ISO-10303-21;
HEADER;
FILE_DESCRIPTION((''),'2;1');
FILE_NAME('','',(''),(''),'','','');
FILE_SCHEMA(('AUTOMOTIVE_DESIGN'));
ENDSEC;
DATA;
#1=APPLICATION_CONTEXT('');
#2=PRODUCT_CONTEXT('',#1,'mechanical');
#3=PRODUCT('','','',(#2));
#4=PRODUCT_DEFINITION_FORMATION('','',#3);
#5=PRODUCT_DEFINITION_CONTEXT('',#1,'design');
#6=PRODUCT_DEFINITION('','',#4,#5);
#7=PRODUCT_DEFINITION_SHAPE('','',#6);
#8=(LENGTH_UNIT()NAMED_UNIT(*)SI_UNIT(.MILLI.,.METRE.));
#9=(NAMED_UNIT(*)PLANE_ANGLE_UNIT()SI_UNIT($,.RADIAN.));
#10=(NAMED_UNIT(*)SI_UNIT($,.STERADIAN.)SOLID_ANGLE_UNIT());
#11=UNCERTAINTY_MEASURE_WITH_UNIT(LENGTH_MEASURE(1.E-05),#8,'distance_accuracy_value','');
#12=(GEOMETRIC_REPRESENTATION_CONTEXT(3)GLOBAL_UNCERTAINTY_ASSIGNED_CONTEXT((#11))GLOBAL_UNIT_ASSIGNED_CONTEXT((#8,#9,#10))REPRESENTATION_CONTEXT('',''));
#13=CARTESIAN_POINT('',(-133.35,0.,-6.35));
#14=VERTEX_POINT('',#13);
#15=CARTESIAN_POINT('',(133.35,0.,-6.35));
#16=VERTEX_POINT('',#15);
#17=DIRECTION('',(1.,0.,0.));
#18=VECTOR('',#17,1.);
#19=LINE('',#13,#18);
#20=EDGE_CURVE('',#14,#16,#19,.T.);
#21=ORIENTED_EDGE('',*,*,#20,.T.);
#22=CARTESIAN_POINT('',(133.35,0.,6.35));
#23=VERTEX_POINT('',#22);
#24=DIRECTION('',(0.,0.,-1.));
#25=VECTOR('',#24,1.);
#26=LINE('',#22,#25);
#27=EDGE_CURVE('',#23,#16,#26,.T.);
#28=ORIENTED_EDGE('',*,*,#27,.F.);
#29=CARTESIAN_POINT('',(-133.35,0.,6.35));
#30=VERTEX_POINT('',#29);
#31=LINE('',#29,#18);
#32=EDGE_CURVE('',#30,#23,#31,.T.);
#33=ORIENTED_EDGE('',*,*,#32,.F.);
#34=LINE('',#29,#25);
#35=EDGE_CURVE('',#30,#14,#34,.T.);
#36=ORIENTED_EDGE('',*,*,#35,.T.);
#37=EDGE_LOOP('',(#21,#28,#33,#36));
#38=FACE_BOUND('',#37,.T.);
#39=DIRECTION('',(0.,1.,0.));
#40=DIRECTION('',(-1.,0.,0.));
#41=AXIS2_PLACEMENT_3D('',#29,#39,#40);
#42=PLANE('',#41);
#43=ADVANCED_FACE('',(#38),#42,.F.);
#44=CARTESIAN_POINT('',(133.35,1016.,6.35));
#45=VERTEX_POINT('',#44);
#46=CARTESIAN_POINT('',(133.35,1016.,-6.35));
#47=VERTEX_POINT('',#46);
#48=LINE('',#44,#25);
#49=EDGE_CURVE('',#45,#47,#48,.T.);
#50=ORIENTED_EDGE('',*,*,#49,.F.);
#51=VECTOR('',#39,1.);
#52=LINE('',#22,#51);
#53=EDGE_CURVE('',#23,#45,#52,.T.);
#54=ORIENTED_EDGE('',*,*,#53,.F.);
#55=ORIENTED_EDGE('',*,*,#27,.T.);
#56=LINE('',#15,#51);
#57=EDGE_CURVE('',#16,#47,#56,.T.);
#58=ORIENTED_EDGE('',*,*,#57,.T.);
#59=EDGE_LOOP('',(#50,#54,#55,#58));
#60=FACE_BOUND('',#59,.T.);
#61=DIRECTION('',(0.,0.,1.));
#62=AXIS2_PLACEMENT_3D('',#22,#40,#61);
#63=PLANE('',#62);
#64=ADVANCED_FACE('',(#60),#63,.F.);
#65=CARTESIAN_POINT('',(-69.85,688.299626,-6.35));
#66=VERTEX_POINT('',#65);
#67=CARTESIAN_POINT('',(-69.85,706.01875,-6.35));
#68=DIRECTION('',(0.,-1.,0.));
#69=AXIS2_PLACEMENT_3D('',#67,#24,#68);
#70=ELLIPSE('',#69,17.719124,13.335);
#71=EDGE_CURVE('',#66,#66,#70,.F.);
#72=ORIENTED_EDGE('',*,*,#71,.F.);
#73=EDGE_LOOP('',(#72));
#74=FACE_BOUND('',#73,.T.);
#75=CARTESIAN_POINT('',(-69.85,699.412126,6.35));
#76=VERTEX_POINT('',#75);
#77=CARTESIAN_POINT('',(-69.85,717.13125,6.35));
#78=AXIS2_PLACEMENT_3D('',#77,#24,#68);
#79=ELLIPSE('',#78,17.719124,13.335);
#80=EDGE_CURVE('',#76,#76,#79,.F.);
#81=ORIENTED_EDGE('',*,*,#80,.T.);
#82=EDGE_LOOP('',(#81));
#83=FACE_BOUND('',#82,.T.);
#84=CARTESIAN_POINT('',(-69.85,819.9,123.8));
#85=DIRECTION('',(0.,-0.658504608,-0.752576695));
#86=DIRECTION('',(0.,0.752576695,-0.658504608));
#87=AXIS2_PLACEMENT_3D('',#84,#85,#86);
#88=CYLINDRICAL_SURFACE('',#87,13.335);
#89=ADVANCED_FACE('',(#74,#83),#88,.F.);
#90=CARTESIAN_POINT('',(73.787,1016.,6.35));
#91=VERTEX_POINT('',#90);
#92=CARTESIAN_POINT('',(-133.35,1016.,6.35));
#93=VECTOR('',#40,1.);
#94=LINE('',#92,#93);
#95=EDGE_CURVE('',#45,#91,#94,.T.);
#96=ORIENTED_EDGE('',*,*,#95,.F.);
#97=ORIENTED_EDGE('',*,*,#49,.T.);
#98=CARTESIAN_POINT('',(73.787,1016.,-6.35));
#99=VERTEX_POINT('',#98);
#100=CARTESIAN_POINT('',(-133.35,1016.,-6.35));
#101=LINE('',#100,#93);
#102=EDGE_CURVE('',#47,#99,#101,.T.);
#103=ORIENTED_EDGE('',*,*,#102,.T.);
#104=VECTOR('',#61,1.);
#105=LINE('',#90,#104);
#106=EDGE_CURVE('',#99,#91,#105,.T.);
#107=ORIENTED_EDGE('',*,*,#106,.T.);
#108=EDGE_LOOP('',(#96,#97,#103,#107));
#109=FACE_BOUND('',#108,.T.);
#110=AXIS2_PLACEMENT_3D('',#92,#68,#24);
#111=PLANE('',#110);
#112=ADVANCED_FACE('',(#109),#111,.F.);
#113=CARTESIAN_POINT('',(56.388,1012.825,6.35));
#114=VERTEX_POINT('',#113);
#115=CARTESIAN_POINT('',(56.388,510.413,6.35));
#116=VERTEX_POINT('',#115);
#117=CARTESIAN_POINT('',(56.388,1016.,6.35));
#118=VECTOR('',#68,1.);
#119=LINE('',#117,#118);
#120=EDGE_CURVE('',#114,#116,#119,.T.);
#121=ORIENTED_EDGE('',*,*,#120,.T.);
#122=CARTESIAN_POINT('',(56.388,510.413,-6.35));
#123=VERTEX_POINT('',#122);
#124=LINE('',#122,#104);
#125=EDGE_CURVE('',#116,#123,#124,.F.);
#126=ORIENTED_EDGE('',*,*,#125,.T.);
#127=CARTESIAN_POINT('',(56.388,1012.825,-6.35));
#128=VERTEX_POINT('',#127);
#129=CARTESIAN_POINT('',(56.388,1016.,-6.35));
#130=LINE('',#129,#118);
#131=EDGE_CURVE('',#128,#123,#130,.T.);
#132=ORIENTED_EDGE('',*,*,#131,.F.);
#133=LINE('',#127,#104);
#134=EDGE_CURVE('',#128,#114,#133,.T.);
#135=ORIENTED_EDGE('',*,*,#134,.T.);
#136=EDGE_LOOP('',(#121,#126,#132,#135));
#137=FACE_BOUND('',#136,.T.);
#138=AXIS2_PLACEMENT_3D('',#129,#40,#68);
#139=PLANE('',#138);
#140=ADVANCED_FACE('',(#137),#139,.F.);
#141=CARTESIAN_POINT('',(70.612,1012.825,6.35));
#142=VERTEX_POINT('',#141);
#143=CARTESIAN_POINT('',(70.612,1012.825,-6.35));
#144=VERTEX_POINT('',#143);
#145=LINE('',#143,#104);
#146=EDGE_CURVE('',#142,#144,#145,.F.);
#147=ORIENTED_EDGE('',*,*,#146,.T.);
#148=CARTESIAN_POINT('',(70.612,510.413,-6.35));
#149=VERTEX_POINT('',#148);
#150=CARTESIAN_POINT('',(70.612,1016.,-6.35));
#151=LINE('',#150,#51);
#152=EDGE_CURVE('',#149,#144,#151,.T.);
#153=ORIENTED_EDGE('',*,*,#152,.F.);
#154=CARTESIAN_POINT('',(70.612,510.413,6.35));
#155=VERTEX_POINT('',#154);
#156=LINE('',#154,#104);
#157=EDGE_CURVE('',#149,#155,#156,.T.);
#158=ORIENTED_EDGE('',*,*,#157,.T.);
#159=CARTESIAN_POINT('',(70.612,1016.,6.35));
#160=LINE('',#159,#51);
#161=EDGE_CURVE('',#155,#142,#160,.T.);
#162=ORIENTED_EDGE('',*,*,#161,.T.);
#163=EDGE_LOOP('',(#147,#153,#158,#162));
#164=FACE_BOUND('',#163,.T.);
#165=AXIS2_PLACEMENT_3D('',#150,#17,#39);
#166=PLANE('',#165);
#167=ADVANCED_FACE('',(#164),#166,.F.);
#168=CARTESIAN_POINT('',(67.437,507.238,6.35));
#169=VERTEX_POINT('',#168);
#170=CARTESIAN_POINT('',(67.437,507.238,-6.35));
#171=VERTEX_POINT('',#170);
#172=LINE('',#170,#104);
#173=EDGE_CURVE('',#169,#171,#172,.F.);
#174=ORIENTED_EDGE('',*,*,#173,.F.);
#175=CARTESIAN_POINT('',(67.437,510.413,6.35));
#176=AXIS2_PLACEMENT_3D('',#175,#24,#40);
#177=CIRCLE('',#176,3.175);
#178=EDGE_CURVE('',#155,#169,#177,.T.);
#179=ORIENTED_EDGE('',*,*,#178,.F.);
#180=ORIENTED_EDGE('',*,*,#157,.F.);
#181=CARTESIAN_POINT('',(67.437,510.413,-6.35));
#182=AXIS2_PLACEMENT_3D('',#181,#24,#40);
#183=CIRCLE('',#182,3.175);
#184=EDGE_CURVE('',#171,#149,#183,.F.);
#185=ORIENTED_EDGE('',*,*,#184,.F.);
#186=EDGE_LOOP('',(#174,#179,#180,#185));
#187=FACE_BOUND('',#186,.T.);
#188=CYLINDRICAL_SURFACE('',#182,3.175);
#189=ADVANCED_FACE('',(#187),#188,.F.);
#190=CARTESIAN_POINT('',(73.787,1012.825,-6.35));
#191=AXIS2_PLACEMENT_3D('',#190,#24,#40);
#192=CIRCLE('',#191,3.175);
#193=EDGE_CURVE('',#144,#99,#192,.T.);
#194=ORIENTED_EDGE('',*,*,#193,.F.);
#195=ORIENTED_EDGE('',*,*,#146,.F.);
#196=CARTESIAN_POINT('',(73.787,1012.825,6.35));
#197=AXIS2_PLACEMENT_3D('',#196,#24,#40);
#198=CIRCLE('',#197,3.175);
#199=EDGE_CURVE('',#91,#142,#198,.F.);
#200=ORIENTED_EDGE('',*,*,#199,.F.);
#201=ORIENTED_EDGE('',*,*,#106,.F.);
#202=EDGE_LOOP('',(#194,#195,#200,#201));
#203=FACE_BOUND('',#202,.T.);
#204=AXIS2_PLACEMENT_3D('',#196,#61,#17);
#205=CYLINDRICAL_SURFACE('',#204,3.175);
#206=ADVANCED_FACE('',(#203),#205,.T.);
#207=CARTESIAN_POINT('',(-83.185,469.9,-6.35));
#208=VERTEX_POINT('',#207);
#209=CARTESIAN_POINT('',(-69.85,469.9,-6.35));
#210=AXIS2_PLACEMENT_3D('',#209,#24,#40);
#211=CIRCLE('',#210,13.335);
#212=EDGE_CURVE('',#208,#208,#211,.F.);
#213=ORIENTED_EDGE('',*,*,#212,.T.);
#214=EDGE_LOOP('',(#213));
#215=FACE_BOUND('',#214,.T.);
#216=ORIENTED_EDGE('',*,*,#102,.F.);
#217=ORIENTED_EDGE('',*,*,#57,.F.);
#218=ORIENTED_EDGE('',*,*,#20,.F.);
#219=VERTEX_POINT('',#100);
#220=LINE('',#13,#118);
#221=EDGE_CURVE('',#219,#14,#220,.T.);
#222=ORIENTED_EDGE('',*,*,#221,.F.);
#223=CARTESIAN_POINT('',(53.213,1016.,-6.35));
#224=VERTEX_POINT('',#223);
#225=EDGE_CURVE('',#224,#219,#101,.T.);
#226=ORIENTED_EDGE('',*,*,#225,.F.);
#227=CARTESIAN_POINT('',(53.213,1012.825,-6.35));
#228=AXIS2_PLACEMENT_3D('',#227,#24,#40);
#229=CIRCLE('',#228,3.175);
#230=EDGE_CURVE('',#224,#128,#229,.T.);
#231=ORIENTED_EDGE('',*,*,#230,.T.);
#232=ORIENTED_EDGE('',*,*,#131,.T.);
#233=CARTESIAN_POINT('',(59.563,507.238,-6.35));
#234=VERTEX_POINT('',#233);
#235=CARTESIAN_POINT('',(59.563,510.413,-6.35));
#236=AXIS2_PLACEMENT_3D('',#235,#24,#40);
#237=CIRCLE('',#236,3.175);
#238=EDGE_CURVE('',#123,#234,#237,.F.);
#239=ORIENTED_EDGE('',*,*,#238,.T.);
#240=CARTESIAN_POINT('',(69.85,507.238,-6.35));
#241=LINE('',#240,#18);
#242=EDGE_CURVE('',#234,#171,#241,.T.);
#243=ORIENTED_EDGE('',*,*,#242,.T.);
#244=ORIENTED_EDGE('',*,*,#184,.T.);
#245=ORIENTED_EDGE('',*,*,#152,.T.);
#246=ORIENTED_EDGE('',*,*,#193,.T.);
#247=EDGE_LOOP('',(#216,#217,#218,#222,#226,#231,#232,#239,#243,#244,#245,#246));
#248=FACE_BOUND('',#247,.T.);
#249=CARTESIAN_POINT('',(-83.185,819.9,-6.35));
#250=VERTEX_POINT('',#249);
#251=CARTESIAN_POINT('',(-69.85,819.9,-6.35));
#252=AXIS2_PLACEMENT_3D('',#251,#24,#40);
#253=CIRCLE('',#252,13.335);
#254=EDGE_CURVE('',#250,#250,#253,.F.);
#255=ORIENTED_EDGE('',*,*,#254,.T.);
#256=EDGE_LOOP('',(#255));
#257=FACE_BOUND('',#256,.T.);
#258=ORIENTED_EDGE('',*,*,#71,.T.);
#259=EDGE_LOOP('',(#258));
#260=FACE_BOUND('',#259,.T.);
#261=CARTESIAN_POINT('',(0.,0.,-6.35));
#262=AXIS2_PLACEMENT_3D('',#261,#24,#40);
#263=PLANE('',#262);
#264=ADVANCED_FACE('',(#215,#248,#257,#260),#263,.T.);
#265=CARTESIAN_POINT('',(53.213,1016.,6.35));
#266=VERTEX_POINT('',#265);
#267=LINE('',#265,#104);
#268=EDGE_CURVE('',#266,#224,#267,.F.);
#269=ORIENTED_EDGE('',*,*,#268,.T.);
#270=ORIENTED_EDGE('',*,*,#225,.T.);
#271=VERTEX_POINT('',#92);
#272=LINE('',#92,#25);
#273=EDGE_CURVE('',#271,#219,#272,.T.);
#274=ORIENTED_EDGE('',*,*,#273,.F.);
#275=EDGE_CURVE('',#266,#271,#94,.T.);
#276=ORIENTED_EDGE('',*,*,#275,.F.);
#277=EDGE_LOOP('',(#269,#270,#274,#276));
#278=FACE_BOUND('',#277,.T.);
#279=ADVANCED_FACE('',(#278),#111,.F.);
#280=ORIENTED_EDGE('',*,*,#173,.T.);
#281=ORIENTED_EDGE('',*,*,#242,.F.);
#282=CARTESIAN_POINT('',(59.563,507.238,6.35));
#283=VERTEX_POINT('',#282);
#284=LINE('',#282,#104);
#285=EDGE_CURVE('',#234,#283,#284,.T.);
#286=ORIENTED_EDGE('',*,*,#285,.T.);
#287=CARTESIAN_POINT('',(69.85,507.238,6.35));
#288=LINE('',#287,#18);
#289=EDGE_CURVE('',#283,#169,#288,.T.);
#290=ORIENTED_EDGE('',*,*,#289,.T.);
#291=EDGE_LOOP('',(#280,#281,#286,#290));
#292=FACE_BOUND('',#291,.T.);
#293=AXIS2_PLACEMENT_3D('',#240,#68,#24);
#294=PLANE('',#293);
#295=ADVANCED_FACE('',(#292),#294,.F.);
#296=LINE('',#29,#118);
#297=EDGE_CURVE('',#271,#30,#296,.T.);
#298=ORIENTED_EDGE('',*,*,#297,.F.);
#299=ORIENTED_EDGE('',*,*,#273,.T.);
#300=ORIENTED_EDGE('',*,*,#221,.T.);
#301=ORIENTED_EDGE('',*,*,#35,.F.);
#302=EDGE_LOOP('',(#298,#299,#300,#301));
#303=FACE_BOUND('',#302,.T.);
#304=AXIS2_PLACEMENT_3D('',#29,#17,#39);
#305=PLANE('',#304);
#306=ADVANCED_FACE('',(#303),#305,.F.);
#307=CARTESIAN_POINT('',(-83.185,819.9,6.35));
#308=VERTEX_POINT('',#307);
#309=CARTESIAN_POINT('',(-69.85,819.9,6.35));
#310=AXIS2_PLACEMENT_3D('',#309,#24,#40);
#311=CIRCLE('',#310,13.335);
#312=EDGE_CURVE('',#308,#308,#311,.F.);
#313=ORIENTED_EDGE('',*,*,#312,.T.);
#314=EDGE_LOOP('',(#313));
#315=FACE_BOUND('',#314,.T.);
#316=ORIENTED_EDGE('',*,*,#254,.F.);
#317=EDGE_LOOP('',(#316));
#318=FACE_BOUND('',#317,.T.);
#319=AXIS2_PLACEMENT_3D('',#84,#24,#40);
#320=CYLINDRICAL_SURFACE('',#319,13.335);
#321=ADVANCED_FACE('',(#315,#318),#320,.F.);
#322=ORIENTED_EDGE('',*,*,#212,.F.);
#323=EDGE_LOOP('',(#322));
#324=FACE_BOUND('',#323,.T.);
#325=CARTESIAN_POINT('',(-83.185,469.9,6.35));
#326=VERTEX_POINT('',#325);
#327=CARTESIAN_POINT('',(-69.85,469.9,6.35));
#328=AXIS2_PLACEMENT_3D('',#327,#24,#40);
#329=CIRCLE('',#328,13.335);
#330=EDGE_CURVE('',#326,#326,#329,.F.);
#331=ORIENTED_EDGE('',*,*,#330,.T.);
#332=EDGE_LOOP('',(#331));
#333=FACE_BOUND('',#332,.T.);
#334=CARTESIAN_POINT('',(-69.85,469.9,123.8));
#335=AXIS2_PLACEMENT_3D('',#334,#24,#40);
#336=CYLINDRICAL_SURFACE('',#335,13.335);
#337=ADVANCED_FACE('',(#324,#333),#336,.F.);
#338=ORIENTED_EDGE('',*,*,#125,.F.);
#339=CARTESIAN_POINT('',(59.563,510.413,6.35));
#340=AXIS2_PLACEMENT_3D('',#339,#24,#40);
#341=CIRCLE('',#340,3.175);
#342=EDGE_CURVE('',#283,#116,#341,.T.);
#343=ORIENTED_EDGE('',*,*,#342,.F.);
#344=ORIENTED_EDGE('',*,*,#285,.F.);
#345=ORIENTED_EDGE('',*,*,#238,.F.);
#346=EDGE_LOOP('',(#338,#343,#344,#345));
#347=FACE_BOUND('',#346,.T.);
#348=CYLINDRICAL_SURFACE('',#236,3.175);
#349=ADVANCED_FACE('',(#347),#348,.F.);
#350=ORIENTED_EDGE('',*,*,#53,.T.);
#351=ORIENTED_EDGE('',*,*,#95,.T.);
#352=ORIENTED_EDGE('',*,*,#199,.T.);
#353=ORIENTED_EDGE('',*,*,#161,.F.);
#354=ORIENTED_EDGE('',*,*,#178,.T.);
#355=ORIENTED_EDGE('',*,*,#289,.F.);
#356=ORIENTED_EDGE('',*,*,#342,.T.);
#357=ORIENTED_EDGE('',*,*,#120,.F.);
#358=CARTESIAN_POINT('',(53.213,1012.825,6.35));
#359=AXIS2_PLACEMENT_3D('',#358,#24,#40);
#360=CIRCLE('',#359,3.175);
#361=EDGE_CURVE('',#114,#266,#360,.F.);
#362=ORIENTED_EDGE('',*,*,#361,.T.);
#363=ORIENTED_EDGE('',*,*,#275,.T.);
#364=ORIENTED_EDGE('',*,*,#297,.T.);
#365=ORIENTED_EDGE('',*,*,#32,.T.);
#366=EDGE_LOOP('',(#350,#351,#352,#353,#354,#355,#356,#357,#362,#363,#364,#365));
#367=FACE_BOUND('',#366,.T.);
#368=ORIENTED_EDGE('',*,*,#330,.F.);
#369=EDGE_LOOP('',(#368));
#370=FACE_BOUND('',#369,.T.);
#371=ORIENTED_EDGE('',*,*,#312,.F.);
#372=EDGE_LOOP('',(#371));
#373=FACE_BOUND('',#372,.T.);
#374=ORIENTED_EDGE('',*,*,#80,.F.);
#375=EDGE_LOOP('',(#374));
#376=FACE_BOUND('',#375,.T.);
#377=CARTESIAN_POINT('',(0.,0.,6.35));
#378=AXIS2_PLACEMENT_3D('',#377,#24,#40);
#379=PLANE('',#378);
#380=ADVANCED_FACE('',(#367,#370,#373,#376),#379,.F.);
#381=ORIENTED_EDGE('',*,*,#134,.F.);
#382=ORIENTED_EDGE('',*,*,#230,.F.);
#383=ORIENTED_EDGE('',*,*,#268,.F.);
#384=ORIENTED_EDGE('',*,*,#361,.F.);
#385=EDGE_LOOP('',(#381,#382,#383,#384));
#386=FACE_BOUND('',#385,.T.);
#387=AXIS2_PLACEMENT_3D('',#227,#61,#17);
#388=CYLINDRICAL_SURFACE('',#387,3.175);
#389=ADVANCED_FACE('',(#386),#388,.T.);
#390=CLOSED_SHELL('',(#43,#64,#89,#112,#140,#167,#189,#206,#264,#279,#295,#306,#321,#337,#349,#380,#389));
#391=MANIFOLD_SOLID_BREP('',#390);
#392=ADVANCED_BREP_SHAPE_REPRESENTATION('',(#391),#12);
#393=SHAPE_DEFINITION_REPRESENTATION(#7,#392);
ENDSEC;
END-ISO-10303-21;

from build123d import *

# Parameters (mm, degrees)
SKETCH2_W               = 266.7
SKETCH2_H               = 1016
BOSS_EXTRUDE1_DEPTH     = 6.35
CUT_EXTRUDE3_DEPTH      = 1025.733402028
CUT_EXTRUDE3_DEPTH_BACK = 1025.733402028
SKETCH5_W               = 12.7
SKETCH5_H               = 508
MOVE_FACE_SLOT_BY       = 0.762
MOVE_FACE_SLOT_2_BY     = 0.762
MOVE_FACE_SLOT_3_BY     = 0.762
FILLET1_R               = 3.175


with BuildPart() as part:
    # Sketch2 → Boss-Extrude1 (new, symmetric)
    with BuildSketch(Plane.XY):
        with Locations((0, 508)):
            Rectangle(SKETCH2_W, SKETCH2_H)
    extrude(amount=BOSS_EXTRUDE1_DEPTH, both=True)

    # Cavity1: read off the stored shape, not the designer's step
    # Cavity1: loft between two sections, ruled curve by curve
    cavity1_from = [
        Edge.make_three_point_arc((-82.55, 819.9, 6.35), (-69.85, 832.6, 6.35), (-57.15, 819.9, 6.35)),
        Edge.make_three_point_arc((-57.15, 819.9, 6.35), (-69.85, 807.2, 6.35), (-82.55, 819.9, 6.35)),
    ]
    cavity1_to = [
        Edge.make_three_point_arc((-82.55, 819.9, -6.35), (-69.85, 832.6, -6.35), (-57.15, 819.9, -6.35)),
        Edge.make_three_point_arc((-57.15, 819.9, -6.35), (-69.85, 807.2, -6.35), (-82.55, 819.9, -6.35)),
    ]
    cavity1 = Solid(Shell([*[Face.make_surface_from_curves(cavity1_from[k], cavity1_to[k]) for k in range(2)], Face(Wire(cavity1_from)), Face(Wire(cavity1_to))]))
    add(cavity1, mode=Mode.SUBTRACT)

    # Cavity1 2: loft between two sections, ruled curve by curve
    cavity1_2_from = [
        Edge.make_three_point_arc((-69.85, 714.991315977, 23.190482806), (-82.55, 724.54904, 14.827474286), (-69.85, 734.106764023, 6.464465766)),
        Edge.make_three_point_arc((-69.85, 734.106764023, 6.464465766), (-57.15, 724.54904, 14.827474286), (-69.85, 714.991315977, 23.190482806)),
    ]
    cavity1_2_to = [
        Edge.make_three_point_arc((-69.85, 689.13960738, -6.354327019), (-82.55, 698.697331403, -14.717335539), (-69.85, 708.255055426, -23.080344059)),
        Edge.make_three_point_arc((-69.85, 708.255055426, -23.080344059), (-57.15, 698.697331403, -14.717335539), (-69.85, 689.13960738, -6.354327019)),
    ]
    cavity1_2 = Solid(Shell([*[Face.make_surface_from_curves(cavity1_2_from[k], cavity1_2_to[k]) for k in range(2)], Face(Wire(cavity1_2_from)), Face(Wire(cavity1_2_to))]))
    add(cavity1_2, mode=Mode.SUBTRACT)

    # Cavity1 3: loft between two sections, ruled curve by curve
    cavity1_3_from = [
        Edge.make_three_point_arc((-82.55, 469.9, 6.35), (-69.85, 482.6, 6.35), (-57.15, 469.9, 6.35)),
        Edge.make_three_point_arc((-57.15, 469.9, 6.35), (-69.85, 457.2, 6.35), (-82.55, 469.9, 6.35)),
    ]
    cavity1_3_to = [
        Edge.make_three_point_arc((-82.55, 469.9, -6.35), (-69.85, 482.6, -6.35), (-57.15, 469.9, -6.35)),
        Edge.make_three_point_arc((-57.15, 469.9, -6.35), (-69.85, 457.2, -6.35), (-82.55, 469.9, -6.35)),
    ]
    cavity1_3 = Solid(Shell([*[Face.make_surface_from_curves(cavity1_3_from[k], cavity1_3_to[k]) for k in range(2)], Face(Wire(cavity1_3_from)), Face(Wire(cavity1_3_to))]))
    add(cavity1_3, mode=Mode.SUBTRACT)

    # Sketch5 → Cut-Extrude3 (cut, two sides: drawn at the far end of the back side and taken through both)
    with BuildSketch(Plane.XY.offset(-CUT_EXTRUDE3_DEPTH_BACK)):
        with Locations((63.5, 762)):
            Rectangle(SKETCH5_W, SKETCH5_H)
    extrude(amount=CUT_EXTRUDE3_DEPTH + CUT_EXTRUDE3_DEPTH_BACK, mode=Mode.SUBTRACT)

    # Move Face slot: a face moved inward by 0.762
    extrude(part.faces().sort_by_distance((63.5, 508, 0))[0], amount=MOVE_FACE_SLOT_BY, dir=(0, -1, 0), mode=Mode.SUBTRACT)

    # Move Face slot 2: a face moved inward by 0.762
    extrude(part.faces().sort_by_distance((69.85, 762, 0))[0], amount=MOVE_FACE_SLOT_2_BY, dir=(1, 0, 0), mode=Mode.SUBTRACT)

    # Move Face slot 3: a face moved inward by 0.762
    extrude(part.faces().sort_by_distance((57.15, 762, 0))[0], amount=MOVE_FACE_SLOT_3_BY, dir=(-1, 0, 0), mode=Mode.SUBTRACT)

    # Fillet1
    fillet1_edges = [part.edges().sort_by_distance(p)[0] for p in [
        (70.612, 1016, 0),
        (70.612, 507.238, 0),
        (56.388, 507.238, 0),
        (56.388, 1016, 0),
    ]]
    fillet(fillet1_edges, radius=FILLET1_R)

    # Move Face hole: read off the stored shape, not the designer's step
    # Move Face hole: loft between two sections, ruled curve by curve
    move_face_hole_from = [
        Edge.make_three_point_arc((-83.185, 819.9, 6.35), (-69.85, 833.235, 6.35), (-56.515, 819.9, 6.35)),
        Edge.make_three_point_arc((-56.515, 819.9, 6.35), (-69.85, 806.565, 6.35), (-83.185, 819.9, 6.35)),
    ]
    move_face_hole_to = [
        Edge.make_three_point_arc((-83.185, 819.9, -6.35), (-69.85, 833.235, -6.35), (-56.515, 819.9, -6.35)),
        Edge.make_three_point_arc((-56.515, 819.9, -6.35), (-69.85, 806.565, -6.35), (-83.185, 819.9, -6.35)),
    ]
    move_face_hole = Solid(Shell([*[Face.make_surface_from_curves(move_face_hole_from[k], move_face_hole_to[k]) for k in range(2)], Face(Wire(move_face_hole_from)), Face(Wire(move_face_hole_to))]))
    add(move_face_hole, mode=Mode.SUBTRACT)

    # Move Face hole 2: loft between two sections, ruled curve by curve
    move_face_hole_2_from = [
        Edge.make_three_point_arc((-69.85, 714.884319276, 24.032506946), (-83.185, 724.9199295, 15.251348), (-69.85, 734.955539724, 6.470189054)),
        Edge.make_three_point_arc((-69.85, 734.955539724, 6.470189054), (-56.515, 724.9199295, 15.251348), (-69.85, 714.884319276, 24.032506946)),
    ]
    move_face_hole_2_to = [
        Edge.make_three_point_arc((-69.85, 688.295650249, -6.35454337), (-83.185, 698.331260473, -15.135702316), (-69.85, 708.366870697, -23.916861262)),
        Edge.make_three_point_arc((-69.85, 708.366870697, -23.916861262), (-56.515, 698.331260473, -15.135702316), (-69.85, 688.295650249, -6.35454337)),
    ]
    move_face_hole_2 = Solid(Shell([*[Face.make_surface_from_curves(move_face_hole_2_from[k], move_face_hole_2_to[k]) for k in range(2)], Face(Wire(move_face_hole_2_from)), Face(Wire(move_face_hole_2_to))]))
    add(move_face_hole_2, mode=Mode.SUBTRACT)

    # Move Face hole 3: loft between two sections, ruled curve by curve
    move_face_hole_3_from = [
        Edge.make_three_point_arc((-83.185, 469.9, 6.35), (-69.85, 483.235, 6.35), (-56.515, 469.9, 6.35)),
        Edge.make_three_point_arc((-56.515, 469.9, 6.35), (-69.85, 456.565, 6.35), (-83.185, 469.9, 6.35)),
    ]
    move_face_hole_3_to = [
        Edge.make_three_point_arc((-83.185, 469.9, -6.35), (-69.85, 483.235, -6.35), (-56.515, 469.9, -6.35)),
        Edge.make_three_point_arc((-56.515, 469.9, -6.35), (-69.85, 456.565, -6.35), (-83.185, 469.9, -6.35)),
    ]
    move_face_hole_3 = Solid(Shell([*[Face.make_surface_from_curves(move_face_hole_3_from[k], move_face_hole_3_to[k]) for k in range(2)], Face(Wire(move_face_hole_3_from)), Face(Wire(move_face_hole_3_to))]))
    add(move_face_hole_3, mode=Mode.SUBTRACT)


solid = part.part
